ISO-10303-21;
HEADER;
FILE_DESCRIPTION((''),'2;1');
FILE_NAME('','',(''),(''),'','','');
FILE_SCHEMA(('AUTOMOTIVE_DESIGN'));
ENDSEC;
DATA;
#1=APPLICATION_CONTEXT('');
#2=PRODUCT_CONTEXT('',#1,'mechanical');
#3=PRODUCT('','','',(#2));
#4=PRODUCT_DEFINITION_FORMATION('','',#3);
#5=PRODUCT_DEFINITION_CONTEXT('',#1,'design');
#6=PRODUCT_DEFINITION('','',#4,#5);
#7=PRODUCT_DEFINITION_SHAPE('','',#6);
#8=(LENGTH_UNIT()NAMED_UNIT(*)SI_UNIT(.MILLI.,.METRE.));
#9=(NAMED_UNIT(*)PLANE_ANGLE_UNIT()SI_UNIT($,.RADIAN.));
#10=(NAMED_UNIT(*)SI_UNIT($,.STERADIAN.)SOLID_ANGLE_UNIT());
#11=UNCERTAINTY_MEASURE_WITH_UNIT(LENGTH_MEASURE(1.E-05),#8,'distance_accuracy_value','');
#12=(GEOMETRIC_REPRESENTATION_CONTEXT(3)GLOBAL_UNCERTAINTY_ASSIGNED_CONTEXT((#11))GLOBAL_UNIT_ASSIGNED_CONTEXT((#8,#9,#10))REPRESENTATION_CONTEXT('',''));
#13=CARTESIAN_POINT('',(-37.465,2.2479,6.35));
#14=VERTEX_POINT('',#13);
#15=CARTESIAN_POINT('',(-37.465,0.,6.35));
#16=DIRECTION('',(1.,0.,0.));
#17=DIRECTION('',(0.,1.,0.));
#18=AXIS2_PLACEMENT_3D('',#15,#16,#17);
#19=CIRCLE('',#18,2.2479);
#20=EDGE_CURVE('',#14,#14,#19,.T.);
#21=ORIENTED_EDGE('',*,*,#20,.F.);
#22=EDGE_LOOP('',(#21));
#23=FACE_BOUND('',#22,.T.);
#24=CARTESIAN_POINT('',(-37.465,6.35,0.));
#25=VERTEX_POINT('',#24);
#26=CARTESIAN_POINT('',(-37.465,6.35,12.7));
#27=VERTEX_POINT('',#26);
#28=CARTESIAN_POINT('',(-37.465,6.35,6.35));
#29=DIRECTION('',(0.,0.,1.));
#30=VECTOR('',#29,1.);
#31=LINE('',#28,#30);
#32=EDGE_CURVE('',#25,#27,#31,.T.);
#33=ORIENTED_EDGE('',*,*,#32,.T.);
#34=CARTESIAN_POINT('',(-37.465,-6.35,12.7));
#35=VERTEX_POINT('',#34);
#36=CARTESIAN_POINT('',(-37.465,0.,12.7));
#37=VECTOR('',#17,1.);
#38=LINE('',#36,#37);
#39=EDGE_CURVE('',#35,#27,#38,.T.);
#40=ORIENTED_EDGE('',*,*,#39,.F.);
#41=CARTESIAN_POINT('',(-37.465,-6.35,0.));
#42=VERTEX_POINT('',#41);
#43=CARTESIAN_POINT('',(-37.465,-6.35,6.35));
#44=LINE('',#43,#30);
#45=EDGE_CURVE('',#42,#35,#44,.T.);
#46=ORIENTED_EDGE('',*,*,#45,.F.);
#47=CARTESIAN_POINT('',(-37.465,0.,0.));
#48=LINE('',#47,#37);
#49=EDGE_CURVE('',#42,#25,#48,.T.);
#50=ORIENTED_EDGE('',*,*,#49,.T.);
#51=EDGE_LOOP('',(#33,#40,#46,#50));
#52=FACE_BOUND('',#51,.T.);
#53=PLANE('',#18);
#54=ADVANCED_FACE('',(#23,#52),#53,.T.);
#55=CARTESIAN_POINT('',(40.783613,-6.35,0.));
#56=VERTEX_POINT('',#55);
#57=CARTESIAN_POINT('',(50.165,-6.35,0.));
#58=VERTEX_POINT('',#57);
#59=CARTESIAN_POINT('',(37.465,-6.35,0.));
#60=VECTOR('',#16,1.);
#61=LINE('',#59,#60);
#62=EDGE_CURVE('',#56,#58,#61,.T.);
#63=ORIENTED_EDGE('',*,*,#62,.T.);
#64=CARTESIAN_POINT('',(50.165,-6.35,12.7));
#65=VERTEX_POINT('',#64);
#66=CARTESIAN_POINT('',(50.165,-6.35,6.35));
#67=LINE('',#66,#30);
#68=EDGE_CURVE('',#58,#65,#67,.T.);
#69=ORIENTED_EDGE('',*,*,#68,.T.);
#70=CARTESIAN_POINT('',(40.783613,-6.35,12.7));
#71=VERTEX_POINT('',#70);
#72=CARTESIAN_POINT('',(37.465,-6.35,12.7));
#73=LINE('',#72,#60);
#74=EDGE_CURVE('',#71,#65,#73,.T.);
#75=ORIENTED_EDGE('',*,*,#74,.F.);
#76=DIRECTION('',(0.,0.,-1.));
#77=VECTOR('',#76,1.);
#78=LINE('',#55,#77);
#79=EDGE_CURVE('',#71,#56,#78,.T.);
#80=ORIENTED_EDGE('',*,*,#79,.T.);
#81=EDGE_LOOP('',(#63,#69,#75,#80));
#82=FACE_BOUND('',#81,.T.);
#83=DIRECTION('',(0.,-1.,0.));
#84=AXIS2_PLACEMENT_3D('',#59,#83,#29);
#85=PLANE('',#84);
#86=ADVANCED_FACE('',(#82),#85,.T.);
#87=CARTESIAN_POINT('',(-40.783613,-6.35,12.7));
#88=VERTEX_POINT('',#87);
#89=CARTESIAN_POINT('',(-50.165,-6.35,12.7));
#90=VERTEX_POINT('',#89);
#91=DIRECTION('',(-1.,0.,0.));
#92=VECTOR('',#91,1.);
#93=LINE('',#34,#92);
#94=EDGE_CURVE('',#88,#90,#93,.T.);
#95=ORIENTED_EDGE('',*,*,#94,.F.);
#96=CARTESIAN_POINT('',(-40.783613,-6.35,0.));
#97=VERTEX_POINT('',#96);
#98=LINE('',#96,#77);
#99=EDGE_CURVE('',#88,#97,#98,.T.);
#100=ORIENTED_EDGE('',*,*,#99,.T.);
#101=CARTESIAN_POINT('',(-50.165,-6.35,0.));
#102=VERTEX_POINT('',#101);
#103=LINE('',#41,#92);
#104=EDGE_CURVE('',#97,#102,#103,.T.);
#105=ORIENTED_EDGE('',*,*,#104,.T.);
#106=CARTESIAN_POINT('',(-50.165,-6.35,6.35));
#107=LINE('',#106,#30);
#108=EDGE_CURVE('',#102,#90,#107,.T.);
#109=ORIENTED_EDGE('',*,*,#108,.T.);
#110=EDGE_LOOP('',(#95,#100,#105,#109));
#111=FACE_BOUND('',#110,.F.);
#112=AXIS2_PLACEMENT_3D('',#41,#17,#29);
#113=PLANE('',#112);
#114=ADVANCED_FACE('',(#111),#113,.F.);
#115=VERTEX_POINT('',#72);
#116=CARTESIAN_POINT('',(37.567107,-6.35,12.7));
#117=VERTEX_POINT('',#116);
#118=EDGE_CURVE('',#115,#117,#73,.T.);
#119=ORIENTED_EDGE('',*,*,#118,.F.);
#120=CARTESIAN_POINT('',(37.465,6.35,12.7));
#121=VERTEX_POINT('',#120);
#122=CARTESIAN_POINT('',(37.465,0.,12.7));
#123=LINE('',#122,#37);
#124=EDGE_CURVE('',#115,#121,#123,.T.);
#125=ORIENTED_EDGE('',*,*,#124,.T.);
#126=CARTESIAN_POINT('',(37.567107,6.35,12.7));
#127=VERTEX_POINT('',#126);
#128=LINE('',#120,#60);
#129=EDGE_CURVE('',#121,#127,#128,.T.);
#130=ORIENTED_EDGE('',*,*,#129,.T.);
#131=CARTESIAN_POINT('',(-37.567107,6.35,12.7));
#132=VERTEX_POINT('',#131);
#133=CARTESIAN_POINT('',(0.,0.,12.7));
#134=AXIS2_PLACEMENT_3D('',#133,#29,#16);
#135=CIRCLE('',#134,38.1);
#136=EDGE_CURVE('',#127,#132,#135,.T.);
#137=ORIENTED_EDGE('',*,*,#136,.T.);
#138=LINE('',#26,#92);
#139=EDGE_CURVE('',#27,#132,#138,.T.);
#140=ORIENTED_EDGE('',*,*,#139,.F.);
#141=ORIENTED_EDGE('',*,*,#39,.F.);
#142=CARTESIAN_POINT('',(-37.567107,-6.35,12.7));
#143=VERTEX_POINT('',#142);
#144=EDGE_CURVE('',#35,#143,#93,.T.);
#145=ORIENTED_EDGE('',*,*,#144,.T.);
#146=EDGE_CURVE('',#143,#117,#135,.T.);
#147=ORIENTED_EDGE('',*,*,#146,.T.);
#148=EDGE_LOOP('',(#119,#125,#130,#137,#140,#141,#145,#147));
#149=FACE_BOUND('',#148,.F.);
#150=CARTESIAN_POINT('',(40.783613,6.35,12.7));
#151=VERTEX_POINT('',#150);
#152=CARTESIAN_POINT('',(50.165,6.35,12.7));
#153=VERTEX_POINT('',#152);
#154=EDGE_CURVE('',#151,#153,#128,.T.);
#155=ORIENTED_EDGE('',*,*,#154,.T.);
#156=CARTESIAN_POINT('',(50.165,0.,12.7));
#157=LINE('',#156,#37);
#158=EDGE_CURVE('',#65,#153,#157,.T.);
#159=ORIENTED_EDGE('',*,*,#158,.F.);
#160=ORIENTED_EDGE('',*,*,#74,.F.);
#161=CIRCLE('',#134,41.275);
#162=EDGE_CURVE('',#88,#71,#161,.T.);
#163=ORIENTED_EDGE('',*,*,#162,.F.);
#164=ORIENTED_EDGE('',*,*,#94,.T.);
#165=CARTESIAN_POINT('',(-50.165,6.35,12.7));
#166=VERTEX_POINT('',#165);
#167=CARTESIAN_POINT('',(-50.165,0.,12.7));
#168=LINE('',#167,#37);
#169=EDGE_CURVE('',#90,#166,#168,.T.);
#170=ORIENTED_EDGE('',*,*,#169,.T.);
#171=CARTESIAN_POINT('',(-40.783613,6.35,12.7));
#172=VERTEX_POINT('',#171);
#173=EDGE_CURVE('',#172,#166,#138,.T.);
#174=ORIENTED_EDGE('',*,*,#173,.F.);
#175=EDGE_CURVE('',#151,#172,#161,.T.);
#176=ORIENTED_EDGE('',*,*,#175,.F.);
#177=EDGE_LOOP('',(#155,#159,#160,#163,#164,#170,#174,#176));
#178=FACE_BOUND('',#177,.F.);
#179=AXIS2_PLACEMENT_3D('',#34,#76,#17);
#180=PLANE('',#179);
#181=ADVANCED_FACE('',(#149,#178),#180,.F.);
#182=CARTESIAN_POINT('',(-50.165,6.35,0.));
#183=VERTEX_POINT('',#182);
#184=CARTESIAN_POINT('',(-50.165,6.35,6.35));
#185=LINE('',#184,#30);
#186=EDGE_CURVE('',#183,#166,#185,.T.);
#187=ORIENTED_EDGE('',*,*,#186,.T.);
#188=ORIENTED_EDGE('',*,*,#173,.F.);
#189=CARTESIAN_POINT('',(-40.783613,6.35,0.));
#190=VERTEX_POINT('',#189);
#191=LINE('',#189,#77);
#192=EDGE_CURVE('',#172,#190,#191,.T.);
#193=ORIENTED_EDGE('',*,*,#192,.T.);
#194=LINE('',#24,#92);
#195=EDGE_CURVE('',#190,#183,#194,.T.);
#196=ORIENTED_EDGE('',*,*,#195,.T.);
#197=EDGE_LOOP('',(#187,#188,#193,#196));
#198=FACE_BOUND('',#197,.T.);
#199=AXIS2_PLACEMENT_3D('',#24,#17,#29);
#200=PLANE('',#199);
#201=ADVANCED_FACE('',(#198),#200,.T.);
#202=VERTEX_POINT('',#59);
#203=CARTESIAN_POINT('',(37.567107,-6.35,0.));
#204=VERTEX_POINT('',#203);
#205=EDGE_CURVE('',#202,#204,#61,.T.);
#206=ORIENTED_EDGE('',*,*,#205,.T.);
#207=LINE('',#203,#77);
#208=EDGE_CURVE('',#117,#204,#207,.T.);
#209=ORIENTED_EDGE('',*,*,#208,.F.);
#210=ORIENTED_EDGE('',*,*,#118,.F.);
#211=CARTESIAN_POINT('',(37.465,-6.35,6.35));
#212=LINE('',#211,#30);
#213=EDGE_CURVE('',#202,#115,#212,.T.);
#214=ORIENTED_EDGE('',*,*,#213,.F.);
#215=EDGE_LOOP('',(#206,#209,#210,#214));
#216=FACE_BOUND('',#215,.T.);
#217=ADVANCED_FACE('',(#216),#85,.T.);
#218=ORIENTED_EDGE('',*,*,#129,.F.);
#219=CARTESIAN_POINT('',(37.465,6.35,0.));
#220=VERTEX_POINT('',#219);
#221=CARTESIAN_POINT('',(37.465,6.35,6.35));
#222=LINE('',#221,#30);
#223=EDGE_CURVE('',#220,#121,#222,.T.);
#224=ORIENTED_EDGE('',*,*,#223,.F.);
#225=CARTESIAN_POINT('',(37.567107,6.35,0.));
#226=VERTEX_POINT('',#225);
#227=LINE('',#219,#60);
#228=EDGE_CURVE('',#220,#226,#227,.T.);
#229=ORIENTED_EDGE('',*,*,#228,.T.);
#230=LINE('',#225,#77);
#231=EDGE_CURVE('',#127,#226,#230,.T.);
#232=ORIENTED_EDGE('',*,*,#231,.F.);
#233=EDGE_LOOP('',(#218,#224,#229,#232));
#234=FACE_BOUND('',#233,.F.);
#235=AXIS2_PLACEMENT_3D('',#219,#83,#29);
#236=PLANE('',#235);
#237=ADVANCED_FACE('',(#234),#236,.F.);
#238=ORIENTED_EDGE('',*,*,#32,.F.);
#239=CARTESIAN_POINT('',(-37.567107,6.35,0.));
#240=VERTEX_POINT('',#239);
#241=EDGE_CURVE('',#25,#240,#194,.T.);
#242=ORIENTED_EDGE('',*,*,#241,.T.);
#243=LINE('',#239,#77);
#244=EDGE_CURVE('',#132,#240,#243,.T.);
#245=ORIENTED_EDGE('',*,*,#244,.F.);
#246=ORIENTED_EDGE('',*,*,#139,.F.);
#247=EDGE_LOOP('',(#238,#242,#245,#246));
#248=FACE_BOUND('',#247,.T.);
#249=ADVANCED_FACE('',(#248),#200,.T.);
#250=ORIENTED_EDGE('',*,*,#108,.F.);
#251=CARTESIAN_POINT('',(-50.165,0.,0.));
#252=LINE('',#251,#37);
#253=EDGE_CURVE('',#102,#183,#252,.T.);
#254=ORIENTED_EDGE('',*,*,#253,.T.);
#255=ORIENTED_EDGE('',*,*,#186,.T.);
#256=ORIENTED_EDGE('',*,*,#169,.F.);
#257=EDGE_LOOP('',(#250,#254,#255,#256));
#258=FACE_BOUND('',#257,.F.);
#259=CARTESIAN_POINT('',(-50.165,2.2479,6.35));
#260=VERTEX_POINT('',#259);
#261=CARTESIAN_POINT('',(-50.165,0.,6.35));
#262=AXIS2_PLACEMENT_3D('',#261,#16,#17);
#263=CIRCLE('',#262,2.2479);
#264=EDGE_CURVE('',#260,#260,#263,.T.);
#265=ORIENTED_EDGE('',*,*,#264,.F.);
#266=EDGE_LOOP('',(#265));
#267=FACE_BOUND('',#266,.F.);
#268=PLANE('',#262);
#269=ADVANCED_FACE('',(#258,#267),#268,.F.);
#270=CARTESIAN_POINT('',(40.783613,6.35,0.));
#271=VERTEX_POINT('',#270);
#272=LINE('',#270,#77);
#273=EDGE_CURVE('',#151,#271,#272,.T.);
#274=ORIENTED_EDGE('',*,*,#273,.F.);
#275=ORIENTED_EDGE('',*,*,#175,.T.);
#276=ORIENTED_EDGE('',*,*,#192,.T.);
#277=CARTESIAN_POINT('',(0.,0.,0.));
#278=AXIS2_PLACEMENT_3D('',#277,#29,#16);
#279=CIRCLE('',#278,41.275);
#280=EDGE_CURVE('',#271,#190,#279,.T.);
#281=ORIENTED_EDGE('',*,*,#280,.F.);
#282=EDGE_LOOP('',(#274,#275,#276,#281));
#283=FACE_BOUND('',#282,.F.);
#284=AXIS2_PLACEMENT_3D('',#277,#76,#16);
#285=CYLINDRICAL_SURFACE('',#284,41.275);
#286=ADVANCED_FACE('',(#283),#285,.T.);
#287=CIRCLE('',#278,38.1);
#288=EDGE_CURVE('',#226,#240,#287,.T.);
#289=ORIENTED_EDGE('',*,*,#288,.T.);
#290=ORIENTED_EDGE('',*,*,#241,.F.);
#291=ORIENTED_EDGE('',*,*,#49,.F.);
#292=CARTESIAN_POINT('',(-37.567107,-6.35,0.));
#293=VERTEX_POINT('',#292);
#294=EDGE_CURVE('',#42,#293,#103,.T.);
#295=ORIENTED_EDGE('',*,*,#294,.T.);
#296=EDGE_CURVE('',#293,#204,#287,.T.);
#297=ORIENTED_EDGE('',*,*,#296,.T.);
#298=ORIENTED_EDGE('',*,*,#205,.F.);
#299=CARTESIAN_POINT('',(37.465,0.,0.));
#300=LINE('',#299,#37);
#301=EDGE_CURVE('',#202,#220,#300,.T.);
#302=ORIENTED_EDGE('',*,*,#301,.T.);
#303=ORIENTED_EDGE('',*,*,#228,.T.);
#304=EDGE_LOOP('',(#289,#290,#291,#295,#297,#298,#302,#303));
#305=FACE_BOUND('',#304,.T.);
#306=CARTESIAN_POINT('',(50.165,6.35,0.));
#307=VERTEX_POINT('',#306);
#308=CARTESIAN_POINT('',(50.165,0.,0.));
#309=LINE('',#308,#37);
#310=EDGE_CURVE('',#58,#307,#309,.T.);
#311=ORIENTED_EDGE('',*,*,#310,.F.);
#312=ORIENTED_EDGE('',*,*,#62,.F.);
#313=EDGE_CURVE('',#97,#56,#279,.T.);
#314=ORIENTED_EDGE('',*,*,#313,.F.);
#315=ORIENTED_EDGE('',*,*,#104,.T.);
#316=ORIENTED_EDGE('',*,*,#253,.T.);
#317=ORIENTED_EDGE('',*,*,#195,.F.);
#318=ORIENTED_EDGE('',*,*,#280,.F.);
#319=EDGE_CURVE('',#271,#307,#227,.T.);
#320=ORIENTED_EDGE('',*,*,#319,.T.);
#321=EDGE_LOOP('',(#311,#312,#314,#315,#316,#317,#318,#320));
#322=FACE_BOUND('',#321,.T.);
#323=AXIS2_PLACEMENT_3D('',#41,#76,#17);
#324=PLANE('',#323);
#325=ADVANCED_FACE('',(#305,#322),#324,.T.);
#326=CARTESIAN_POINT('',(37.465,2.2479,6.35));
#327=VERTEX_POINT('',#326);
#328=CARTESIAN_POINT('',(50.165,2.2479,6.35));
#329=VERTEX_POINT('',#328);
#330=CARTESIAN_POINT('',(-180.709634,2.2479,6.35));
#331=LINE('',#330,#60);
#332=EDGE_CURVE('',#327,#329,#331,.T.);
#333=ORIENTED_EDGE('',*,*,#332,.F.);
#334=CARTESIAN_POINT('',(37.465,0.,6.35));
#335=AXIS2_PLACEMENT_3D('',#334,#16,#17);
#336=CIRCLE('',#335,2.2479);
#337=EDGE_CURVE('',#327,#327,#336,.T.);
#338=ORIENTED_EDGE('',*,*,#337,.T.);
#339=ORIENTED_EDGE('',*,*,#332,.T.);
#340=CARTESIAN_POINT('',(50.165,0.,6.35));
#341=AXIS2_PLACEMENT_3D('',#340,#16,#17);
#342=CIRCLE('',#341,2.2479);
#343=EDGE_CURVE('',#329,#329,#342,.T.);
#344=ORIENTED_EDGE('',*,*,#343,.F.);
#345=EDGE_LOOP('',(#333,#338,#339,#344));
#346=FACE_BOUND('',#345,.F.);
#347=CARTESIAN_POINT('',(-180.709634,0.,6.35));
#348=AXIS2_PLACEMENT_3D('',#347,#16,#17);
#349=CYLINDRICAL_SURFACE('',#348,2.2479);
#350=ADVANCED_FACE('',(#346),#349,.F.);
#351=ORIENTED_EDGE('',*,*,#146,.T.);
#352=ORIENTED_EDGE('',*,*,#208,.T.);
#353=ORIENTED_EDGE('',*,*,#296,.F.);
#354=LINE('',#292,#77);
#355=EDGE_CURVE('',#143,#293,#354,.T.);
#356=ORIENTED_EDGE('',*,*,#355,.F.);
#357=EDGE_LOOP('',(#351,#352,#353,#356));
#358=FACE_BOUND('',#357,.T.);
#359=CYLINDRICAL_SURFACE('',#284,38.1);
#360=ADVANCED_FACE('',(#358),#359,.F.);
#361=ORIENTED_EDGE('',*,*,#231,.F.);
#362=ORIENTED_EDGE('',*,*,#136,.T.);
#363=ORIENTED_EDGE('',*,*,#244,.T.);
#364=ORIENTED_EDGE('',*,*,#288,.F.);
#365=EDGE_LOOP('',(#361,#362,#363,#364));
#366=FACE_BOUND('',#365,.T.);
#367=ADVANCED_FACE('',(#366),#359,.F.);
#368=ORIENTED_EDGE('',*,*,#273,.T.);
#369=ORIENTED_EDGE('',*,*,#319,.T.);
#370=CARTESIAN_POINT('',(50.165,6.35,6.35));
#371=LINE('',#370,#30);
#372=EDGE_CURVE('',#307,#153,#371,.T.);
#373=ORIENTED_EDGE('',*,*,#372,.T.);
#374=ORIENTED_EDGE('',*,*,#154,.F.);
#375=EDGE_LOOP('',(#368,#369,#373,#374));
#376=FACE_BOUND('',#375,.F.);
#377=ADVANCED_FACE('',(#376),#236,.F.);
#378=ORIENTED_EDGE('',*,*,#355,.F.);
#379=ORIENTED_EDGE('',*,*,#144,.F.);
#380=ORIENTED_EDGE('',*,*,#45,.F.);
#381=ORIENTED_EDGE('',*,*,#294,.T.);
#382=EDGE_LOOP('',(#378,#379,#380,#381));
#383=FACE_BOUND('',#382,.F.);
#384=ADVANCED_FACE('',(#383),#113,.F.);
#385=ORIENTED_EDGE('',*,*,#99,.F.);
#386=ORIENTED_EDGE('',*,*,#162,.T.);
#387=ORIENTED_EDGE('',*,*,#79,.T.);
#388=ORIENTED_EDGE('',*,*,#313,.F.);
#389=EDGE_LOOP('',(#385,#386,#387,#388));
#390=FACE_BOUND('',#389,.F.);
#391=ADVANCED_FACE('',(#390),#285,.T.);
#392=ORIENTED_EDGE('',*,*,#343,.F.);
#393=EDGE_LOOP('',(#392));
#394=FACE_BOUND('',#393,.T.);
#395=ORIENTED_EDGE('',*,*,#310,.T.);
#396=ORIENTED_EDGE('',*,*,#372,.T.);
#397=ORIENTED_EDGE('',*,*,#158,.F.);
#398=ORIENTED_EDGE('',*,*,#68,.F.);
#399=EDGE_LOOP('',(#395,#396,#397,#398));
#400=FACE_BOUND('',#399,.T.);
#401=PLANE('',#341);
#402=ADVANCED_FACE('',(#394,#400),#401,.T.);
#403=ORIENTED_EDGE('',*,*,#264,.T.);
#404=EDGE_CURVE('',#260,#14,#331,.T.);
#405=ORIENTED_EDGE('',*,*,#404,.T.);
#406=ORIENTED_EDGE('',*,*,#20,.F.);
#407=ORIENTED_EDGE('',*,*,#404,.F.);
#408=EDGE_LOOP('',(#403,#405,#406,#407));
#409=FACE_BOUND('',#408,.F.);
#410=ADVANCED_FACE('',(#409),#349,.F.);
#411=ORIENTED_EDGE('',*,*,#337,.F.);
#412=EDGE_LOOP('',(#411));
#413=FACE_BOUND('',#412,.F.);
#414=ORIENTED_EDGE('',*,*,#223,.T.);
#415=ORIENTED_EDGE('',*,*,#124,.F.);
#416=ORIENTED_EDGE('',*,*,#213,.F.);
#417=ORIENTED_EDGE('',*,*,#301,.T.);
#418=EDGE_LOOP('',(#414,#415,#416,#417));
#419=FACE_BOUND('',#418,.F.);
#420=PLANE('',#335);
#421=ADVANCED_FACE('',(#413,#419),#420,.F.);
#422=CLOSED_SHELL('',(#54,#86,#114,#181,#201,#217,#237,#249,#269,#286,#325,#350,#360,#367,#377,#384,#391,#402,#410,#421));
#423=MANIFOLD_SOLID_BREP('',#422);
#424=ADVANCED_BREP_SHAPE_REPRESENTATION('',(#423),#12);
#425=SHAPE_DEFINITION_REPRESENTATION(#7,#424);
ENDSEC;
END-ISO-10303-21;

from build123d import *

# Parameters (mm, degrees)
F0_R     = 41.275
F0_R_2   = 38.1
F1_DEPTH = 12.7
F3_W     = 12.7
F3_H     = 12.7
F4_DEPTH = 12.7
F6_W     = 12.7
F6_H     = 12.7
F7_DEPTH = 12.7
F9_D     = 4.4958


with BuildPart() as f1:
    # F0 (on Top) → F1 (new body)
    with BuildSketch(Plane.XY):
        Circle(F0_R)
        Circle(F0_R_2, mode=Mode.SUBTRACT)
    extrude(amount=F1_DEPTH)

    # F3 (on offset) → F4 (join)
    with BuildSketch(Plane.YZ.offset(37.465)):
        with Locations((0, 6.35)):
            Rectangle(F3_W, F3_H)
    extrude(amount=F4_DEPTH)

    # F6 (on offset) → F7 (join)
    with BuildSketch(Plane.YZ.offset(-37.465)):
        with Locations((0, 6.35)):
            Rectangle(F6_W, F6_H)
    extrude(amount=-F7_DEPTH)

    # F9 (through all)
    with Locations(Plane(origin=(-50.165, 0, 0), x_dir=(0, -1, 0), z_dir=(-1, 0, 0))):
        with Locations((0, 6.35)):
            Hole(F9_D / 2)


solid = f1.part
